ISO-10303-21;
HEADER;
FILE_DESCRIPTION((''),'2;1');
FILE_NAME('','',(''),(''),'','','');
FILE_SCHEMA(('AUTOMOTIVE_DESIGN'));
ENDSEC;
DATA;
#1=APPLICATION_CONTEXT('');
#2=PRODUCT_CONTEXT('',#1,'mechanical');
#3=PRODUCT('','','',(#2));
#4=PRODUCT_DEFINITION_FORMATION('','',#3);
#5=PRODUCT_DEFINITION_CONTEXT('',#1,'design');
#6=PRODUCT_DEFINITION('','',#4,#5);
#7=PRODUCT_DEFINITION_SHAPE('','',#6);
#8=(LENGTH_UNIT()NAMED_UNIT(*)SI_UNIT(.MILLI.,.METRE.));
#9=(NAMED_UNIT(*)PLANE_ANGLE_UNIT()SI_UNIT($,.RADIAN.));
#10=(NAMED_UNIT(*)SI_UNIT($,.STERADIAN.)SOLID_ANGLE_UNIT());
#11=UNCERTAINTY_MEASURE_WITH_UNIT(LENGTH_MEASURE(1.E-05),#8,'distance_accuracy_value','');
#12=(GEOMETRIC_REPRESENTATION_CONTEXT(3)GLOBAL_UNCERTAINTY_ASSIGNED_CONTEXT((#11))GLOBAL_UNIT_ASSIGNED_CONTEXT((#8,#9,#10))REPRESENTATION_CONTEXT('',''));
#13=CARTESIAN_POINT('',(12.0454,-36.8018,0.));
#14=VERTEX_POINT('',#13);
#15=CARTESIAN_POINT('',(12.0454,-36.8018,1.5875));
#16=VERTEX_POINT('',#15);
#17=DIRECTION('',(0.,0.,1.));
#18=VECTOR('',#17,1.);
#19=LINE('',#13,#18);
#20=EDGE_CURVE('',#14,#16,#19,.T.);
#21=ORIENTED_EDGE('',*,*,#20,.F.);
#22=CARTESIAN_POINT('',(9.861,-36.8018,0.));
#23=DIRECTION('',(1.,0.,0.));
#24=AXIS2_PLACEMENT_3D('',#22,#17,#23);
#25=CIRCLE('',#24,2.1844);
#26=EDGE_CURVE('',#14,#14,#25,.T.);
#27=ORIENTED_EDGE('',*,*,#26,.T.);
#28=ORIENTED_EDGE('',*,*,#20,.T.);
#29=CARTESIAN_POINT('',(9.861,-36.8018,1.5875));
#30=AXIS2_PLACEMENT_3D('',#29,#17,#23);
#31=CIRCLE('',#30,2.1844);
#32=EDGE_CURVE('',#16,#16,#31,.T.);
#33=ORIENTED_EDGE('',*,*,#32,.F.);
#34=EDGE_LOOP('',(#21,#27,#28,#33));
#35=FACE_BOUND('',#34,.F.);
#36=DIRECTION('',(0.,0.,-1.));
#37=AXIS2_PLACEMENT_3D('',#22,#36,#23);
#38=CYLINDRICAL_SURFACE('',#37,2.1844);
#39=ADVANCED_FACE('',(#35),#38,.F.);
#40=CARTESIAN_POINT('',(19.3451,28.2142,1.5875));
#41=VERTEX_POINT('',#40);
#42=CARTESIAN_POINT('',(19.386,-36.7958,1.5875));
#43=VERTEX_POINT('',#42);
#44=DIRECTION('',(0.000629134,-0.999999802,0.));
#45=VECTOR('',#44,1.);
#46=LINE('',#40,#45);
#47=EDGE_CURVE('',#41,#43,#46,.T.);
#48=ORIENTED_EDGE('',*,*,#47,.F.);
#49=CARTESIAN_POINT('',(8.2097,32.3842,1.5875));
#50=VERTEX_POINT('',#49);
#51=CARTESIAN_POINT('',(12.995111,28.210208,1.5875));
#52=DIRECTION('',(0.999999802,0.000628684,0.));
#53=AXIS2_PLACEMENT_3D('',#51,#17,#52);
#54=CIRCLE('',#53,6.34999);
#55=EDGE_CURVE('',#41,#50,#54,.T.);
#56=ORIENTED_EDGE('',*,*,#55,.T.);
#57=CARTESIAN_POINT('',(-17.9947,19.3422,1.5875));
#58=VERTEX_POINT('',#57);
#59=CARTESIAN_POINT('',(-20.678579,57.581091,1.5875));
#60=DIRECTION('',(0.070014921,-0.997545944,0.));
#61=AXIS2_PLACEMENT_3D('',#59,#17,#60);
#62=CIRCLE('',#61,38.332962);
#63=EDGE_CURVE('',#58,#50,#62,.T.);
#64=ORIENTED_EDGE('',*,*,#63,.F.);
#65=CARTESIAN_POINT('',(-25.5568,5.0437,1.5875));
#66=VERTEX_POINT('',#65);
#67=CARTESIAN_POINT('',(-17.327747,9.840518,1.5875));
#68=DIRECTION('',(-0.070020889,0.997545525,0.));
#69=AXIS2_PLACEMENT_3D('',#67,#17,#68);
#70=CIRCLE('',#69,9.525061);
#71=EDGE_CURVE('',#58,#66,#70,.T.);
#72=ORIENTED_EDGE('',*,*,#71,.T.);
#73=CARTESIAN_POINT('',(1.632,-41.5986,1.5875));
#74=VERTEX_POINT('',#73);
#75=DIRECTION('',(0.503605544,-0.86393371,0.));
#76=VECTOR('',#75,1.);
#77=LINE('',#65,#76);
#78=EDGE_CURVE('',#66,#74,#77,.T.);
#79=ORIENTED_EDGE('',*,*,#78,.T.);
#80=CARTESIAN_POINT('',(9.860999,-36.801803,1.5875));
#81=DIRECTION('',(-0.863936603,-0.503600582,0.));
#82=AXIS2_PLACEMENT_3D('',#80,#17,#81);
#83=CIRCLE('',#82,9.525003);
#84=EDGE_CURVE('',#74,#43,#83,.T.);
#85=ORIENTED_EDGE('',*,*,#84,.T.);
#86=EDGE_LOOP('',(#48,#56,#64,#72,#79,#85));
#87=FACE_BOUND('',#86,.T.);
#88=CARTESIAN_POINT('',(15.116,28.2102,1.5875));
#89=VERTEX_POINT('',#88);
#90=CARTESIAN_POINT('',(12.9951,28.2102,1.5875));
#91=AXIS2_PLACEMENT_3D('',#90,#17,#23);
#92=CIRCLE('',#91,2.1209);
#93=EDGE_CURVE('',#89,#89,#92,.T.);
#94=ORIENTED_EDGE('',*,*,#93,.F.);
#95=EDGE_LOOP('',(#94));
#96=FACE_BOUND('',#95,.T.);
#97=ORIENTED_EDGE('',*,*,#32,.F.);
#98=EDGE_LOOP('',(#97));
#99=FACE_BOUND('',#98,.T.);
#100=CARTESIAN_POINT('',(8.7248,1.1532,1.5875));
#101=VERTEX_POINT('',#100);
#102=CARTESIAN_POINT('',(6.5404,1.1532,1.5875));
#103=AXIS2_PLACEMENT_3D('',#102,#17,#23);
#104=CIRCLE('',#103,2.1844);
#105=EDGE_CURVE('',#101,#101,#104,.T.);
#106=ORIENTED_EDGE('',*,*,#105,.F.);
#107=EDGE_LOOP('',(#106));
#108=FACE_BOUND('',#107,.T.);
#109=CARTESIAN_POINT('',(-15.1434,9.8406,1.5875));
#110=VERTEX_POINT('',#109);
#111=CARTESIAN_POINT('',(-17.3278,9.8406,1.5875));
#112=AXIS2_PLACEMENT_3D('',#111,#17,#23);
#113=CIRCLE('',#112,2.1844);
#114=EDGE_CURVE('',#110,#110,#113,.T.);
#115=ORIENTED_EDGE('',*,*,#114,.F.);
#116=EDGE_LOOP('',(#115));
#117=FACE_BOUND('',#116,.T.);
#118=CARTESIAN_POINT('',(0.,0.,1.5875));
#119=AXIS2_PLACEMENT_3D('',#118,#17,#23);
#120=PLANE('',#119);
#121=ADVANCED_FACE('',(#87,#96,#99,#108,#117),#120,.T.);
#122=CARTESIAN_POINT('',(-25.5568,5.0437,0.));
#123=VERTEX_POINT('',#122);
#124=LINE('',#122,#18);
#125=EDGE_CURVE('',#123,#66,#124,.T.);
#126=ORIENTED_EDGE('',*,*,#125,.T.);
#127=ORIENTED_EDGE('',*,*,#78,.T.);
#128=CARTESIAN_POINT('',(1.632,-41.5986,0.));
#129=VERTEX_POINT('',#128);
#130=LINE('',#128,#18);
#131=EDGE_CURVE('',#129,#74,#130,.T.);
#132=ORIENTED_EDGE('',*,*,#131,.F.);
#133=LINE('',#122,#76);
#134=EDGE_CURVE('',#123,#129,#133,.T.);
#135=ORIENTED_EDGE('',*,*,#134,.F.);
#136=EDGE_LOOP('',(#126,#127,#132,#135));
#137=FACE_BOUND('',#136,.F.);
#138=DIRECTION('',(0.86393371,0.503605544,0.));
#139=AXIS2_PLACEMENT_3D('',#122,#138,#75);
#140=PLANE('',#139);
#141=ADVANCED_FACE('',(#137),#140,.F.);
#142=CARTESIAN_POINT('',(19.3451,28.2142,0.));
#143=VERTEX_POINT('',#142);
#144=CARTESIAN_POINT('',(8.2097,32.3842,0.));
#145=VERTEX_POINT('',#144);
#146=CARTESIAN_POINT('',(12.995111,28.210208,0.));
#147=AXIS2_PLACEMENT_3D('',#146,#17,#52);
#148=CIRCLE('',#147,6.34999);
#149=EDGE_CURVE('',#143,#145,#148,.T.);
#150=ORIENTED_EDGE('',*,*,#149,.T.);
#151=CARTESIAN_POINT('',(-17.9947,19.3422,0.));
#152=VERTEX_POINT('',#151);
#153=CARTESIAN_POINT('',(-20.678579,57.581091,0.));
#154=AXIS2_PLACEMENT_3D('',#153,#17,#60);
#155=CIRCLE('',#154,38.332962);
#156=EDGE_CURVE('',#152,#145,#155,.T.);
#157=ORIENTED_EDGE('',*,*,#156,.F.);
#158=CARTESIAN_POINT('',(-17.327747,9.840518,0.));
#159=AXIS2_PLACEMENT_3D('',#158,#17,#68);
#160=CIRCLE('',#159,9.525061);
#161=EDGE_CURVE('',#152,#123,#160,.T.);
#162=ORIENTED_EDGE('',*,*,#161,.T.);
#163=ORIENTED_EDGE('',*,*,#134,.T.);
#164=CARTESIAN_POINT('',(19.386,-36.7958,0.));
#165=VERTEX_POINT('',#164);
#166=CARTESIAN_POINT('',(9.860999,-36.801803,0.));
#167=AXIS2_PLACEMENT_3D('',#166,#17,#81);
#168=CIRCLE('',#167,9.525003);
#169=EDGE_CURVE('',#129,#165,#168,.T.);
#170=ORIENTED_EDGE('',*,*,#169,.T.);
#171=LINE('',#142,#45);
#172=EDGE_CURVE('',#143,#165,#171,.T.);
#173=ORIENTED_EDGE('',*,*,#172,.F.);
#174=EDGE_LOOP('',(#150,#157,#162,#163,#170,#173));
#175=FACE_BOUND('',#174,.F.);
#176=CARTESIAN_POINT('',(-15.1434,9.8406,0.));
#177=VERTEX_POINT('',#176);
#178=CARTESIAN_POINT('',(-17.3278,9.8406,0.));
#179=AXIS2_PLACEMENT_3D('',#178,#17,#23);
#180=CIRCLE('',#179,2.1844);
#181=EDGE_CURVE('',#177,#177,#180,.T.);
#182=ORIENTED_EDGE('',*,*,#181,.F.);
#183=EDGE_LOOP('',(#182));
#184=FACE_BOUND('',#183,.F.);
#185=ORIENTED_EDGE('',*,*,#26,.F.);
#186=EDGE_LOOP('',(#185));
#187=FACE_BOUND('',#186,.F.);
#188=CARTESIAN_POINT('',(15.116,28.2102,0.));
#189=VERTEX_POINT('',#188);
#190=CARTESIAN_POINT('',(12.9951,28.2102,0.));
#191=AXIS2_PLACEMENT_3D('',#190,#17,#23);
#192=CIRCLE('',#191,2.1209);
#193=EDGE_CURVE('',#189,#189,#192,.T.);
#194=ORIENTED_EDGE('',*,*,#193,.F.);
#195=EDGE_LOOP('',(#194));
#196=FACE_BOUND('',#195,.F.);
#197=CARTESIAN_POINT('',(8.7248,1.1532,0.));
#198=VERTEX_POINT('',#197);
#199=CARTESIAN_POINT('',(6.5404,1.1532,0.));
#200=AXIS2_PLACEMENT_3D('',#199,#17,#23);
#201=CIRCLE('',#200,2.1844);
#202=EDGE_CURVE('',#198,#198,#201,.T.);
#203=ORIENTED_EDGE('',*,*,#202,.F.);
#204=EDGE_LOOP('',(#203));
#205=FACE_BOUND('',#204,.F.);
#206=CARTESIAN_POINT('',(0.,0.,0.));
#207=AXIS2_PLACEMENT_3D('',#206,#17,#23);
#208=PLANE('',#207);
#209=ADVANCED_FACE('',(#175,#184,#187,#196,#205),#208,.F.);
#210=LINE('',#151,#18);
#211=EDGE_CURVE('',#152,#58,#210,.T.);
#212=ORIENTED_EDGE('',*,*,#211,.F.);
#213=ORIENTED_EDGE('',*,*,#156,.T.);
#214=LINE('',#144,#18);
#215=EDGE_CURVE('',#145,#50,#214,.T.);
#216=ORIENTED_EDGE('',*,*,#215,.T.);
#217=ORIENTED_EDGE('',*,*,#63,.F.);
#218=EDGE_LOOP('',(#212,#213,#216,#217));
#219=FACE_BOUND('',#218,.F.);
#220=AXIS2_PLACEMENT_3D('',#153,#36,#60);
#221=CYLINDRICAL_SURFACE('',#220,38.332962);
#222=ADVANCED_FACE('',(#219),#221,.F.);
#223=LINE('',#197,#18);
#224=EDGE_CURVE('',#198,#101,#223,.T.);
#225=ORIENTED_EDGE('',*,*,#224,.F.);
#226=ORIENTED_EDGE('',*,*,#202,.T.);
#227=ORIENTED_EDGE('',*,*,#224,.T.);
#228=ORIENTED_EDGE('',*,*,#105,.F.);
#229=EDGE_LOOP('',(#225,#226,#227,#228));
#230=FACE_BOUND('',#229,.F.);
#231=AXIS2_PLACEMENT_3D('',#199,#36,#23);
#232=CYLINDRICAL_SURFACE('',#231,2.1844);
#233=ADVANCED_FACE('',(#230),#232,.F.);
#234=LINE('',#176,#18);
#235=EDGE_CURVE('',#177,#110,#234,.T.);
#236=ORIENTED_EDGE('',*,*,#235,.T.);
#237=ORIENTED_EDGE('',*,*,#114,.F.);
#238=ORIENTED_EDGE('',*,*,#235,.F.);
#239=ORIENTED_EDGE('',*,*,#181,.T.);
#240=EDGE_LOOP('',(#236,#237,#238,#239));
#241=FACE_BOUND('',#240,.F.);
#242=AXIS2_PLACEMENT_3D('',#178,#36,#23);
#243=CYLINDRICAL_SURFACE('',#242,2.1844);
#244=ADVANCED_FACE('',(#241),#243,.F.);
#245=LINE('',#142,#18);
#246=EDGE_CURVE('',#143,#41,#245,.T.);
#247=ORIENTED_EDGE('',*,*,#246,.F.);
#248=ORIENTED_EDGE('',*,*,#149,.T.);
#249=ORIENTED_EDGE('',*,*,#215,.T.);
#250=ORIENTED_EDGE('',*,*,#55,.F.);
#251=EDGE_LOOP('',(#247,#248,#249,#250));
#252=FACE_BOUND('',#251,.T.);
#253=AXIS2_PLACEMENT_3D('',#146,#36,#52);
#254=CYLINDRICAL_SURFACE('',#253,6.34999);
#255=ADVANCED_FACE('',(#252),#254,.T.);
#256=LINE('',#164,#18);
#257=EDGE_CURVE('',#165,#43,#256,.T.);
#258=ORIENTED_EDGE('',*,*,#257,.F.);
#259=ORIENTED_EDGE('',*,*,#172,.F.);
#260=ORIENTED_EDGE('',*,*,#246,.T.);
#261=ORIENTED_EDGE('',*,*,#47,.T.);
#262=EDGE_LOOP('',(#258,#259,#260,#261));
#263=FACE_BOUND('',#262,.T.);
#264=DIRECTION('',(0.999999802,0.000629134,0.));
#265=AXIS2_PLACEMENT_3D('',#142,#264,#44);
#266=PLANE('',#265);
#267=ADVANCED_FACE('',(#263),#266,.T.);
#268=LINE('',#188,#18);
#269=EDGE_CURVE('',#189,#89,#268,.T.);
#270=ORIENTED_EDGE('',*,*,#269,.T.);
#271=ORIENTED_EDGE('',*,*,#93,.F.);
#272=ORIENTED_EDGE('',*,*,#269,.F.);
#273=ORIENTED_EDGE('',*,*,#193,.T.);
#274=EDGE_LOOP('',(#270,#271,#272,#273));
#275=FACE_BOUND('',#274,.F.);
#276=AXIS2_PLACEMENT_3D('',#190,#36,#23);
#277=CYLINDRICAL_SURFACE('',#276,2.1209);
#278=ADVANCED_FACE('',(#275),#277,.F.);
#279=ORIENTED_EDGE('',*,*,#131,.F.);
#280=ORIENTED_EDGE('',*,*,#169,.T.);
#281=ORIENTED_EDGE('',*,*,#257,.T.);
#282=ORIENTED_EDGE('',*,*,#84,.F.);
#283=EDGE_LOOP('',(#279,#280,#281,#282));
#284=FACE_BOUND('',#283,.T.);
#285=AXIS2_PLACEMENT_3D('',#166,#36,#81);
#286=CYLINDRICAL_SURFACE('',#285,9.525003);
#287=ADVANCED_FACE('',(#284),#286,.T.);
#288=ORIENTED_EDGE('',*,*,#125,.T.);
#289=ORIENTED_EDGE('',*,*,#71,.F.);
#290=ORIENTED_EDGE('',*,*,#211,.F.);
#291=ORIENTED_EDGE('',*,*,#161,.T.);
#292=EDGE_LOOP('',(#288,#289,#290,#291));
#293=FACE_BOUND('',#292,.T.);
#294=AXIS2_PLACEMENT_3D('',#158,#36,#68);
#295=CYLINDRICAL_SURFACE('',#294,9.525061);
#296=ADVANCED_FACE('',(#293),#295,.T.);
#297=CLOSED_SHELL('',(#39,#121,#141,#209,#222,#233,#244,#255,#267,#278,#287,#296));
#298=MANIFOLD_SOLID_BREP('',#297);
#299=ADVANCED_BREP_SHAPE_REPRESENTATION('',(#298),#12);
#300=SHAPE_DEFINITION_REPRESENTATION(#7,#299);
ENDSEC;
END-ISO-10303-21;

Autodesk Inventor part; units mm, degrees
ref_plane "YZ Plane" through (0, 0, 0) normal (1, 0, 0) x (0, 1, 0)
ref_plane "XZ Plane" through (0, 0, 0) normal (0, 1, 0) x (-1, 0, 0)
ref_plane "XY Plane" through (0, 0, 0) normal (0, 0, 1) x (1, 0, 0)
sketch "main" plane through (0, 0, 0) normal (0, 0, 1) x (1, 0, 0)
  line L0 (-30.6986, 36.9894) -> (-3.5098, -9.6529)
  line L1 (14.2033, 60.1599) -> (14.2442, -4.8501)
  circle A0 centre (4.7192, -4.8561) radius 2.1844
  arc A1 (-3.5098, -9.6529) -> (14.2442, -4.8501) centre (4.7192, -4.8561) ccw
  line L2 (4.7192, -4.8561) -> (42.8192, -4.8561) construction
  circle A2 centre (1.3985, 33.099) radius 2.1844
  line L3 (4.7192, -4.8561) -> (69.8067, -4.8561) construction
  circle A3 centre (7.8533, 60.1559) radius 2.1209
  arc A4 (14.2033, 60.1599) -> (3.0678, 64.3299) centre (7.8533, 60.1559) ccw
  line L4 (1.3985, 33.099) -> (26.7985, 33.099) construction
  circle A5 centre (-22.4696, 41.7863) radius 2.1844
  arc A6 (-23.1365, 51.2879) -> (-30.6986, 36.9894) centre (-22.4696, 41.7863) ccw
  arc A7 (-23.1365, 51.2879) -> (3.0678, 64.3299) centre (-25.8203, 89.5265) ccw
  point P0 (-13.3913, 7.903)
  dimension "d33" = 19.05
  dimension "d41" = 4.3688
  dimension "d48" = 12.7
  dimension "d52" = 19.05
sketch "Sketch1" plane through (0, 0, 0) normal (0, 0, 1) x (1, 0, 0)
  line L0 (-25.5568, 5.0437) -> (1.632, -41.5986)
  line L1 (19.3451, 28.2142) -> (19.386, -36.7958)
  circle A0 centre (9.861, -36.8018) radius 2.1844
  arc A1 (1.632, -41.5986) -> (19.386, -36.7958) centre (9.861, -36.8018) ccw
  line L2 (9.861, -36.8018) -> (47.961, -36.8018) construction
  circle A2 centre (6.5404, 1.1532) radius 2.1844
  line L3 (9.861, -36.8018) -> (74.9485, -36.8018) construction
  circle A3 centre (12.9951, 28.2102) radius 2.1209
  arc A4 (19.3451, 28.2142) -> (8.2097, 32.3842) centre (12.9951, 28.2102) ccw
  line L4 (6.5404, 1.1532) -> (31.9404, 1.1532) construction
  circle A5 centre (-17.3278, 9.8406) radius 2.1844
  arc A6 (-17.9947, 19.3422) -> (-25.5568, 5.0437) centre (-17.3278, 9.8406) ccw
  arc A7 (-17.9947, 19.3422) -> (8.2097, 32.3842) centre (-20.6785, 57.5808) ccw
  point P0 (0, 0)
extrude "Extrusion1" add sketch "Sketch1" along normal blind 1.5875
properties part number "pod_gusset" material "Acetal Resin, White"
